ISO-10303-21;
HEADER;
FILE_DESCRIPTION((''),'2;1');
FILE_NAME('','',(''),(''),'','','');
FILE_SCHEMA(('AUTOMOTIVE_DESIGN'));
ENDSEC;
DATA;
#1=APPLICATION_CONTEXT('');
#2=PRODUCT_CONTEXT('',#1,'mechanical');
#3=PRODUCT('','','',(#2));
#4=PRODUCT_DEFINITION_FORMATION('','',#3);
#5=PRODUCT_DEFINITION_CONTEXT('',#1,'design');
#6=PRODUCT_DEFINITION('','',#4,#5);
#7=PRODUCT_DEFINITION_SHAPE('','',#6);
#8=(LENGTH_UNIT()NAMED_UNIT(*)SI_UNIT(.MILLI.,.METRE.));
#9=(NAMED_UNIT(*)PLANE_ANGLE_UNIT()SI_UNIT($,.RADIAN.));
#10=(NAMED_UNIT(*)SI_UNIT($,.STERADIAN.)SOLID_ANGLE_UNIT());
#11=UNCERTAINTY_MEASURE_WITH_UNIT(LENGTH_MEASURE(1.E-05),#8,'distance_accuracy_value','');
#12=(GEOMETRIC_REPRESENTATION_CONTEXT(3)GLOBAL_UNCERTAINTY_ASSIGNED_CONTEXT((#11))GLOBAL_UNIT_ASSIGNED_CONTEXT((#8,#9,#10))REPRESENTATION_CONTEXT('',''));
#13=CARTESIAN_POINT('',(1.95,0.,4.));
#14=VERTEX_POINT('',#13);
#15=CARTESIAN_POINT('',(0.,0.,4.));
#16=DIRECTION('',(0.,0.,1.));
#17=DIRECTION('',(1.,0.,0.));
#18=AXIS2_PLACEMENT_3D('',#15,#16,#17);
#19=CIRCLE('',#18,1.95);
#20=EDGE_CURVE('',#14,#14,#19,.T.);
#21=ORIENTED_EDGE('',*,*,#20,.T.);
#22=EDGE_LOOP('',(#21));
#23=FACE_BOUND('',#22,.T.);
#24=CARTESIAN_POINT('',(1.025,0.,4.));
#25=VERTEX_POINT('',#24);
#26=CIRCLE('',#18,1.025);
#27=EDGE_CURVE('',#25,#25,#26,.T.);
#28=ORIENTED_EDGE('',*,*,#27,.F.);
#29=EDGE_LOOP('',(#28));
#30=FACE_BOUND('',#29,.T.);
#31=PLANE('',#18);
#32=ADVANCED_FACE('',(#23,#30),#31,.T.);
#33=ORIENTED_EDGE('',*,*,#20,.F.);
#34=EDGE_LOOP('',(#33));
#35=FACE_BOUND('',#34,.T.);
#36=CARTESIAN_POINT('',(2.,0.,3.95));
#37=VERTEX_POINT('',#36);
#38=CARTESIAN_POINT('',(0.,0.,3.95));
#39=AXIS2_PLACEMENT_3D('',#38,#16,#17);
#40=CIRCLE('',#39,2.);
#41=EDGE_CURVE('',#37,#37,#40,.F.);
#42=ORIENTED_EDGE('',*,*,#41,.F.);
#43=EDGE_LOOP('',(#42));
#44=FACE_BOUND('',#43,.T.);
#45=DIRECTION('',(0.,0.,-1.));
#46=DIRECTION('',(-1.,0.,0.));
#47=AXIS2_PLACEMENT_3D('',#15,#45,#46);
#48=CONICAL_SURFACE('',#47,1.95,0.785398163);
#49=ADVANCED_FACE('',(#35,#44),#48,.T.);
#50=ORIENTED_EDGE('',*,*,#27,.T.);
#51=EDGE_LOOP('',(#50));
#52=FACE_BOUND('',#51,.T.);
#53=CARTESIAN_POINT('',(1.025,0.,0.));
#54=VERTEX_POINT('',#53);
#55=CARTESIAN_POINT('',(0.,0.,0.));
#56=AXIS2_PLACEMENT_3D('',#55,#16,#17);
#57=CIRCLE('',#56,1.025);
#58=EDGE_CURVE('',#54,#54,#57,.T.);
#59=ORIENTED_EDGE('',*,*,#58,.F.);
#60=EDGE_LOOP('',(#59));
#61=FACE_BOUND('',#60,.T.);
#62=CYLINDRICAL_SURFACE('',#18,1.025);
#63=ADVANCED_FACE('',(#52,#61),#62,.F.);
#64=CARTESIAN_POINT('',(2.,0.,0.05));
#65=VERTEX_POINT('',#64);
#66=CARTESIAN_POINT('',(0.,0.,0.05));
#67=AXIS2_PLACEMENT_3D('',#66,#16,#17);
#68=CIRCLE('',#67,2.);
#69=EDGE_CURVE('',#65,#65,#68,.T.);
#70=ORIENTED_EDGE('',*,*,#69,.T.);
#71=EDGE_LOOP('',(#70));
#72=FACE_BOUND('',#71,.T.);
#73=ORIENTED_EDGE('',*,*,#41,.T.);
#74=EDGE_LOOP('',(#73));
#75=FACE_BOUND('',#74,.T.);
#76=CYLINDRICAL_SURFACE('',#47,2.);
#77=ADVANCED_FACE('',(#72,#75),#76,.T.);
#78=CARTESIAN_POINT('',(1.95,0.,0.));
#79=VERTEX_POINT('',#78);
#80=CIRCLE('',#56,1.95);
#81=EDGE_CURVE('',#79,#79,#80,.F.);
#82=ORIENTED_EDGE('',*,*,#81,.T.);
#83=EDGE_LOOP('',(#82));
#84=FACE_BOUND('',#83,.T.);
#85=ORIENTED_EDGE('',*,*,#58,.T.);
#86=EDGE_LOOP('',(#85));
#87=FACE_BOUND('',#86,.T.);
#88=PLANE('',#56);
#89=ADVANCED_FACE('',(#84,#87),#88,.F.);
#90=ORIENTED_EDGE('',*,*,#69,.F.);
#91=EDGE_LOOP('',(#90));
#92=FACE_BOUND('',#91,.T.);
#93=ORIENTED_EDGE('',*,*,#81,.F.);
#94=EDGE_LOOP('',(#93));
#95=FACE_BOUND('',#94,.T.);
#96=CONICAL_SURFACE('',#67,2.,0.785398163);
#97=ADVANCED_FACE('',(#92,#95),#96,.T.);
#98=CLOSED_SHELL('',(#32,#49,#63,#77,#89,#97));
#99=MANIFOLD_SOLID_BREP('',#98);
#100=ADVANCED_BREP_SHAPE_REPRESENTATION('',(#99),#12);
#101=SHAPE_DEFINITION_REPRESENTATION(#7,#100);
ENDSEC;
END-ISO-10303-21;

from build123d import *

# Parameters (mm, degrees)
ESQUISSE1_R              = 2
ESQUISSE1_R_2            = 1.06
EXTRUSION1_DEPTH         = 4
CHANFREIN1_SIZE          = 0.05
SUPPRIMERFACE1_OUTLINE_R = 1.06
SUPPRIMERFACE1_DEPTH     = 4
TROU_TARAUD_M2_51_D      = 2.05


# Read off the part's stored shape, not the designer's step: SupprimerFace1
with BuildPart() as part:
    # Esquisse1 → Extrusion1 (new body)
    with BuildSketch(Plane.XY):
        Circle(ESQUISSE1_R)
        Circle(ESQUISSE1_R_2, mode=Mode.SUBTRACT)
    extrude(amount=EXTRUSION1_DEPTH)

    # Chanfrein1
    chanfrein1_edges = [part.edges().sort_by_distance(p)[0] for p in [
        (-2, 0, 0),
        (-2, 0, 4),
    ]]
    chamfer(chanfrein1_edges, length=CHANFREIN1_SIZE)

    # SupprimerFace1 outline → SupprimerFace1 (add)
    with BuildSketch(Plane.XY):
        Circle(SUPPRIMERFACE1_OUTLINE_R)
    extrude(amount=SUPPRIMERFACE1_DEPTH)

    # Trou taraudé M2.51 (through all)
    with Locations(Plane.XY.offset(4)):
        with Locations((0, 0)):
            Hole(TROU_TARAUD_M2_51_D / 2)


solid = part.part
